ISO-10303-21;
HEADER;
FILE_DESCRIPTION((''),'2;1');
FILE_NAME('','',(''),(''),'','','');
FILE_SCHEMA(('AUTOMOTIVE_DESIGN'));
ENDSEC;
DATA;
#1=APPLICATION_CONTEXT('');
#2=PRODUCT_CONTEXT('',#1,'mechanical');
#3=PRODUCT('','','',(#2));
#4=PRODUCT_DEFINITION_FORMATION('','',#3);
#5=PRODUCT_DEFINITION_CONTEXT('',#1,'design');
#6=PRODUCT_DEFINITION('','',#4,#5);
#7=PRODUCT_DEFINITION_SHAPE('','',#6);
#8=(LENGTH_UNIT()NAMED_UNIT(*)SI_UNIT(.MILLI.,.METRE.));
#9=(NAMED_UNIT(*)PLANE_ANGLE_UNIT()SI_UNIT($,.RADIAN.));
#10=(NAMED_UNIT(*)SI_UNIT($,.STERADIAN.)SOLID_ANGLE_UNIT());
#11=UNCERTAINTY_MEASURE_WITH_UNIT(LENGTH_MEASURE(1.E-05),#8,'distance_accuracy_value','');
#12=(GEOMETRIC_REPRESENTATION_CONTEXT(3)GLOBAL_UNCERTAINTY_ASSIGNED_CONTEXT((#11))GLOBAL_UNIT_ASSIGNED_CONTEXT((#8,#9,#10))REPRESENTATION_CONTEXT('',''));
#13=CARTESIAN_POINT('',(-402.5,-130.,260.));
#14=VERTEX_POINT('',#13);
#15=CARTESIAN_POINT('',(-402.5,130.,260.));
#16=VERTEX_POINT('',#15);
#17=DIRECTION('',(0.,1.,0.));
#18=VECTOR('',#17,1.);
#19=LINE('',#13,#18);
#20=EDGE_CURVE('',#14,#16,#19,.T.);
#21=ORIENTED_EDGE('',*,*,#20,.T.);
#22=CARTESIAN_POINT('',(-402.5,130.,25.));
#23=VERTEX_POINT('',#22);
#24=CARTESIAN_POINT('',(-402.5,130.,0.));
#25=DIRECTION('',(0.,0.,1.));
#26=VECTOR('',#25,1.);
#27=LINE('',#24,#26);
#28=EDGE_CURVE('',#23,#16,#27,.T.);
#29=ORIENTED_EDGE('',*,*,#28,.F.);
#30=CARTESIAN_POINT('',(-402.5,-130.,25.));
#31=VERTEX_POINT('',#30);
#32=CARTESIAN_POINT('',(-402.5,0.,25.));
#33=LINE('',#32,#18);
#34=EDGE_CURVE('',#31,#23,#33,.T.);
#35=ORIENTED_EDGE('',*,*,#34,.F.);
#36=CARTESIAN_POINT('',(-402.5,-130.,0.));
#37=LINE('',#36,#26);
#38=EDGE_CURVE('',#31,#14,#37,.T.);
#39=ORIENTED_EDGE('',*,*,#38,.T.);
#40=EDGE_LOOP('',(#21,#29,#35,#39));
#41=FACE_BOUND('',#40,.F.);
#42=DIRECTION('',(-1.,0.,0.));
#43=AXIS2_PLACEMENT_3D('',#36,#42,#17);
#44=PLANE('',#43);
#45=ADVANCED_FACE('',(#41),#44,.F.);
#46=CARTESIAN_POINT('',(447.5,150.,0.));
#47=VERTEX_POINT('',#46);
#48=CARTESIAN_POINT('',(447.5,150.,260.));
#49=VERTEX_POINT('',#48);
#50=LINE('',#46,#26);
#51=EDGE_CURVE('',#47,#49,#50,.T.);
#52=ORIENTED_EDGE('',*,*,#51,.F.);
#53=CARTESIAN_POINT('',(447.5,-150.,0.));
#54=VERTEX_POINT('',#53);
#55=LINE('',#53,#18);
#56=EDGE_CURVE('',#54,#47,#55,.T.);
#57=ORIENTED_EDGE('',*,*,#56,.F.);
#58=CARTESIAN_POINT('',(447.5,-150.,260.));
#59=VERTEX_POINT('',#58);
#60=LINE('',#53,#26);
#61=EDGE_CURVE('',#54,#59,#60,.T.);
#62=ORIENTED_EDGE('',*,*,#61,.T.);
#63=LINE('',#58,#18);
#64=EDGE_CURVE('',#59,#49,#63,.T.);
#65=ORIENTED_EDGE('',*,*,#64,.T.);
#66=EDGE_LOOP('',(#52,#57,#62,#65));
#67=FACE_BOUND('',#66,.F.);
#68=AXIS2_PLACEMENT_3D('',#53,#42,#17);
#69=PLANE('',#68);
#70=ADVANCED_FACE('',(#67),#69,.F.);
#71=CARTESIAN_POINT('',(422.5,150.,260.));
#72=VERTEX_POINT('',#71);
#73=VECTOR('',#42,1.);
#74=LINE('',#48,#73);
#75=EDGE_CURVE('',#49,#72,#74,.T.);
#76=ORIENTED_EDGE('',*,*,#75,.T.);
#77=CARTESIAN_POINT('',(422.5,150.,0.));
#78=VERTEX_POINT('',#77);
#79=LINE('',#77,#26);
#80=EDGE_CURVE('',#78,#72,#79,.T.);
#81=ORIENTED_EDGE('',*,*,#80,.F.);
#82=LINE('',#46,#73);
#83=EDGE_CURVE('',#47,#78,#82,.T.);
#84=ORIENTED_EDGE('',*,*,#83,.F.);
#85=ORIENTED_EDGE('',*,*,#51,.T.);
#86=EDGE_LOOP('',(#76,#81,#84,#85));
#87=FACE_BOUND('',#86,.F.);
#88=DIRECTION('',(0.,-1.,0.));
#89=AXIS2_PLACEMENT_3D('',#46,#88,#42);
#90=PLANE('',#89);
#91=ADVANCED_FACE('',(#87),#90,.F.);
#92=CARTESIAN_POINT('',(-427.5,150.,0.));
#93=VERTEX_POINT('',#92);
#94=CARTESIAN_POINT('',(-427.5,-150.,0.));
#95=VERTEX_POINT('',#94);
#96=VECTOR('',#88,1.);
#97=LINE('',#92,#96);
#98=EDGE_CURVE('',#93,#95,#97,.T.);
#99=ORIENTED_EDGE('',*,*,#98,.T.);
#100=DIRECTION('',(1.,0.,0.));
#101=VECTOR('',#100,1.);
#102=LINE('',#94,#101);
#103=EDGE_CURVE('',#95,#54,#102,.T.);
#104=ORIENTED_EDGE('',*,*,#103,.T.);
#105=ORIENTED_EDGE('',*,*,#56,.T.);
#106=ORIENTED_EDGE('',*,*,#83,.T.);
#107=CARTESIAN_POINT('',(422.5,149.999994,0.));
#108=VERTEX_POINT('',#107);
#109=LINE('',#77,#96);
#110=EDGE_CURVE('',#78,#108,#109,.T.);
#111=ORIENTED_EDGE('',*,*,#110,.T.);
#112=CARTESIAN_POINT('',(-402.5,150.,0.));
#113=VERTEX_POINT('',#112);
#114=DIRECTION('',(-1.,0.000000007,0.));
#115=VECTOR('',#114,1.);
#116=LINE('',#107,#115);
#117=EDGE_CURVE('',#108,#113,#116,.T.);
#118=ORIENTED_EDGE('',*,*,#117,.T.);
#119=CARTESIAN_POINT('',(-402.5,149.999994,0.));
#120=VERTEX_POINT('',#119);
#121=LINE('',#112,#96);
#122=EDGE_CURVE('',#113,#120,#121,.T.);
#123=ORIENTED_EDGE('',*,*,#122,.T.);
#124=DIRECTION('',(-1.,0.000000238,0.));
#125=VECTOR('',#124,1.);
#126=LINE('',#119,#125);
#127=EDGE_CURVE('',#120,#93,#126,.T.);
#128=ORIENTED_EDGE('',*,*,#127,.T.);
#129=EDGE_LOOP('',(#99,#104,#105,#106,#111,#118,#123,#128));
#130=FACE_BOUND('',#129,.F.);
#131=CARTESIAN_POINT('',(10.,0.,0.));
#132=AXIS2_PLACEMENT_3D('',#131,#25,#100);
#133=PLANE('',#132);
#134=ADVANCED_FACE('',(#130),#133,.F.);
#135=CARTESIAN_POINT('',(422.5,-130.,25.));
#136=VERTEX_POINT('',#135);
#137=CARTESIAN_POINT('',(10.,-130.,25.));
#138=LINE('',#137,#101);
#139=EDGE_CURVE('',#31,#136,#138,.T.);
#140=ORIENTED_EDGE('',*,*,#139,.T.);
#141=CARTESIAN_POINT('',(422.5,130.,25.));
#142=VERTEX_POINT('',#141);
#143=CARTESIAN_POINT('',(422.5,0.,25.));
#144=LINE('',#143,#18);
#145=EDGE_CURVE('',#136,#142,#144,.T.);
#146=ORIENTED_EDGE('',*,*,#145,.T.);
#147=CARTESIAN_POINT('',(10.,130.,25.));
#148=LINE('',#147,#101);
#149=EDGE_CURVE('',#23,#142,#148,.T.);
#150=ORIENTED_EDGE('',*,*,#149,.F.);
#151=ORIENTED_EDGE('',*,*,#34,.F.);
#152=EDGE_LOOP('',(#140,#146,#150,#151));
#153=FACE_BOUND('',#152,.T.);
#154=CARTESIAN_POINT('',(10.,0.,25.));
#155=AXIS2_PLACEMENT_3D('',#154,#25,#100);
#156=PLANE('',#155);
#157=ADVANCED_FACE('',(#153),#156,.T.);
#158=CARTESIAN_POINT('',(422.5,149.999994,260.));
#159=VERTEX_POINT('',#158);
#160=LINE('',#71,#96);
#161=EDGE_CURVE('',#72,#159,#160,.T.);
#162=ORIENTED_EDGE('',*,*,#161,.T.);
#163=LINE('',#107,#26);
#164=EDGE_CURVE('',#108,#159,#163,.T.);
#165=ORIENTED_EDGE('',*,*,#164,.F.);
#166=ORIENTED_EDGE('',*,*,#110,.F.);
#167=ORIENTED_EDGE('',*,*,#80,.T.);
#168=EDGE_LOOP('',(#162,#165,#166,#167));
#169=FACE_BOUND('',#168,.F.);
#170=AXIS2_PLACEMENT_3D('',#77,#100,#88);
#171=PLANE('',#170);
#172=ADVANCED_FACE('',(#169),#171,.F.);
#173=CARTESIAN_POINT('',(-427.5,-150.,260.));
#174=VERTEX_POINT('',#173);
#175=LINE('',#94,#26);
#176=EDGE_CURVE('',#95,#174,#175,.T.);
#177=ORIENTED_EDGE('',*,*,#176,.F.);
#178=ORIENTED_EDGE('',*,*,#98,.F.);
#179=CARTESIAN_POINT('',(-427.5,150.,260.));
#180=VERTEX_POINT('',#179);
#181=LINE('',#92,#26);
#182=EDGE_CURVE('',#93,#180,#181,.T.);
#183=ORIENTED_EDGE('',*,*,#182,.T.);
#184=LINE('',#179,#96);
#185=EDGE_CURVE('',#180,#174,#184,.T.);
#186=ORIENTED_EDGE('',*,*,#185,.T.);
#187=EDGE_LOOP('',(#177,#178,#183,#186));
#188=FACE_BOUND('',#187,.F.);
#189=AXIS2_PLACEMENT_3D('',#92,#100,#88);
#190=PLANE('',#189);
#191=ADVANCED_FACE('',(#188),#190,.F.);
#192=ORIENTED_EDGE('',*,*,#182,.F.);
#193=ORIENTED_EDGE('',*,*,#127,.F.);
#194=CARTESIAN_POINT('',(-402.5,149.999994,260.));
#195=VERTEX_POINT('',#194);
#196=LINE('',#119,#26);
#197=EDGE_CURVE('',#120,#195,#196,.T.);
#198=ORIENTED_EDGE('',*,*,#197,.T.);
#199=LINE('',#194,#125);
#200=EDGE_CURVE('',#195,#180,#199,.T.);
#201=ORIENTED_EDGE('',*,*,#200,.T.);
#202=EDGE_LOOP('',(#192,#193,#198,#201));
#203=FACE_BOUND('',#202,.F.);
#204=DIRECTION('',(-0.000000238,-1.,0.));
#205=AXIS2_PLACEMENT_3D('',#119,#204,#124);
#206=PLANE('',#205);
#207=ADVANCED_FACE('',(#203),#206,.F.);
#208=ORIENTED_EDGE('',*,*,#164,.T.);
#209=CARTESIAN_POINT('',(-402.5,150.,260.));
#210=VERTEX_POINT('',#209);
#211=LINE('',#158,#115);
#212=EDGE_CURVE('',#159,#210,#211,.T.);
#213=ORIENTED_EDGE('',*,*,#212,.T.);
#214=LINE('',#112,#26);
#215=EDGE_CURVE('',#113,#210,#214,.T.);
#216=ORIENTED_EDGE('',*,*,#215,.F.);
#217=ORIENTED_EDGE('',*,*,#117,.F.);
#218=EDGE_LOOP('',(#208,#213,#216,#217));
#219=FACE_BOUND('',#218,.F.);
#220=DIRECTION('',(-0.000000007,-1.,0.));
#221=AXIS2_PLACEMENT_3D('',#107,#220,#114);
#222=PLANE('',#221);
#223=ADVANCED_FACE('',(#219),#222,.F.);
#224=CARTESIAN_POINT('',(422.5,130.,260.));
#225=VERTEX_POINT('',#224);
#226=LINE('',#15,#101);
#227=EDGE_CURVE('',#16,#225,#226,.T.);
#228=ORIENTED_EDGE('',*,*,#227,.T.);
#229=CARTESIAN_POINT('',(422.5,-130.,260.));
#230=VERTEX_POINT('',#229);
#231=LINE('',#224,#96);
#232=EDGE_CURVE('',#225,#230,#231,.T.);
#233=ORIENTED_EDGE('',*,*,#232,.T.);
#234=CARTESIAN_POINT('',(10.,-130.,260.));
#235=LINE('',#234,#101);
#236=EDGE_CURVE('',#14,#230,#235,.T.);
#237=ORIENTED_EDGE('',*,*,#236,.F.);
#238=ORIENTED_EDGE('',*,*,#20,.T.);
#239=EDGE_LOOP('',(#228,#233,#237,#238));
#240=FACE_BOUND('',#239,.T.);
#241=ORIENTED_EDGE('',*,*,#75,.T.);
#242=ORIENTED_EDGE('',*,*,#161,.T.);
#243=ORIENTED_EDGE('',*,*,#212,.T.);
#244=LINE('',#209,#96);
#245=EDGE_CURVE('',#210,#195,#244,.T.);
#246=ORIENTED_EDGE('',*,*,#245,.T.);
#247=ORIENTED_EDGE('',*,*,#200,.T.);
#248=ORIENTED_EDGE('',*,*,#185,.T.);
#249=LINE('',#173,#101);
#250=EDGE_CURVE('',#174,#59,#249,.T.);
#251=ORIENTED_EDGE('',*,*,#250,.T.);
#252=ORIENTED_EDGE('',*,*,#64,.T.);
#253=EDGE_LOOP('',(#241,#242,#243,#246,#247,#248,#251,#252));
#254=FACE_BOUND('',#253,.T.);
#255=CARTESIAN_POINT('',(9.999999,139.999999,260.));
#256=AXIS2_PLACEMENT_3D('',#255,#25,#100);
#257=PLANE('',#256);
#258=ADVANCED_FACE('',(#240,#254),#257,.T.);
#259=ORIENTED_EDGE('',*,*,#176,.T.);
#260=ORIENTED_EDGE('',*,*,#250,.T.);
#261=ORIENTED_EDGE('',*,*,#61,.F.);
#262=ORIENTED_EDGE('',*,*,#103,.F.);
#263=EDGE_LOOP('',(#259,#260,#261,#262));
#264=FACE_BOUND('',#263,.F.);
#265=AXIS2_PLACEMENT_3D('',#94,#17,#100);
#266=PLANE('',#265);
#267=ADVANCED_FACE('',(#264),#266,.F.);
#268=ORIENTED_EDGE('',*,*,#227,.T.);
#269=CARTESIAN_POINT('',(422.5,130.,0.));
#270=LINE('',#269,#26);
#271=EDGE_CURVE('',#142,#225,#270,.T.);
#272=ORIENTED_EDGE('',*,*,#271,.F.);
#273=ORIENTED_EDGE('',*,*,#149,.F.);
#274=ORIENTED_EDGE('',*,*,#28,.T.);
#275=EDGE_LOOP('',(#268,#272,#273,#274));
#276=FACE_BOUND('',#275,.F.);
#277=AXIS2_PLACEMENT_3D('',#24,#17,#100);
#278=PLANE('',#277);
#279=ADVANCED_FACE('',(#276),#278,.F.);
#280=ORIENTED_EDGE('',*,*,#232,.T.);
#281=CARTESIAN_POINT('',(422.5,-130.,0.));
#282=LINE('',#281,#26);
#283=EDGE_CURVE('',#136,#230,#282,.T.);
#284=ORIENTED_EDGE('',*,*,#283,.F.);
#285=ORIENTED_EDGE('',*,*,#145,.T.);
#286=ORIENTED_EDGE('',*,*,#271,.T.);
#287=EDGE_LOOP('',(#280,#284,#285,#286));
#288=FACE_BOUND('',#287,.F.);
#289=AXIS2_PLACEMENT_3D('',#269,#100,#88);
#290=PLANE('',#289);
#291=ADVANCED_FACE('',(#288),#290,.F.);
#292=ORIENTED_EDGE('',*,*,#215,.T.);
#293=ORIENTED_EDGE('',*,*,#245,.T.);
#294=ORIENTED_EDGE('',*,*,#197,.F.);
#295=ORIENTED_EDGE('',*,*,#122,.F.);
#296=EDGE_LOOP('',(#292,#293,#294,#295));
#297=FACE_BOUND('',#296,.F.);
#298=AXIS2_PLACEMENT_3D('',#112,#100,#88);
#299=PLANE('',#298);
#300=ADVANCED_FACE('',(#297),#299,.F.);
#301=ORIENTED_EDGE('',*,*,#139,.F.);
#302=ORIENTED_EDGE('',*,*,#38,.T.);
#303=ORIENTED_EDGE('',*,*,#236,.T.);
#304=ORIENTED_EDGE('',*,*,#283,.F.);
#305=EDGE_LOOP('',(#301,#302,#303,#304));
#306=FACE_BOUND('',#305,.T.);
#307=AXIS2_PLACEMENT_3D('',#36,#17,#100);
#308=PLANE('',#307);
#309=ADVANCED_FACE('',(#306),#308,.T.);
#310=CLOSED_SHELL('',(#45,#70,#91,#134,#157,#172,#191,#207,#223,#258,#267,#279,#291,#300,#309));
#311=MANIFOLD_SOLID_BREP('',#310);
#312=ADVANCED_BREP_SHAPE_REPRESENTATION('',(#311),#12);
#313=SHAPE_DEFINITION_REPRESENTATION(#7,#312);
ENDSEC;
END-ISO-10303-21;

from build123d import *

# Parameters (mm, degrees)
F0_W     = 825
F0_H     = 20
F1_DEPTH = 260
F0_H_2   = 260
F2_DEPTH = 25


# Not quite as in the source:
# - ends of sketch curves that miss each other by under 0.0002 mm in the source are joined
# - a feature names something its author has since deleted; it is built from what else it names


with BuildPart() as f1:
    # F0 (on Top) → F1 (new body)
    with BuildSketch(Plane.XY):
        Polygon((422.5, 130), (422.5, 149.9999940395), (-402.5, 150), (-402.5, 130), align=None)
        Polygon((422.5, -150), (447.5, -150), (447.5, 150), (422.5, 150), (422.5, 130), (422.5, -130), align=None)
        with Locations((10, -140)):
            Rectangle(F0_W, F0_H)
        Polygon((-427.5, -150), (-402.5, -150), (-402.5, -130), (-402.5, 130), (-402.5, 149.9999940395), (-427.5, 150), align=None)
    extrude(amount=F1_DEPTH)

    # F0 (on Top) → F2 (join)
    with BuildSketch(Plane.XY):
        with Locations((10, 0)):
            Rectangle(F0_W, F0_H_2)
    extrude(amount=F2_DEPTH)


solid = f1.part
